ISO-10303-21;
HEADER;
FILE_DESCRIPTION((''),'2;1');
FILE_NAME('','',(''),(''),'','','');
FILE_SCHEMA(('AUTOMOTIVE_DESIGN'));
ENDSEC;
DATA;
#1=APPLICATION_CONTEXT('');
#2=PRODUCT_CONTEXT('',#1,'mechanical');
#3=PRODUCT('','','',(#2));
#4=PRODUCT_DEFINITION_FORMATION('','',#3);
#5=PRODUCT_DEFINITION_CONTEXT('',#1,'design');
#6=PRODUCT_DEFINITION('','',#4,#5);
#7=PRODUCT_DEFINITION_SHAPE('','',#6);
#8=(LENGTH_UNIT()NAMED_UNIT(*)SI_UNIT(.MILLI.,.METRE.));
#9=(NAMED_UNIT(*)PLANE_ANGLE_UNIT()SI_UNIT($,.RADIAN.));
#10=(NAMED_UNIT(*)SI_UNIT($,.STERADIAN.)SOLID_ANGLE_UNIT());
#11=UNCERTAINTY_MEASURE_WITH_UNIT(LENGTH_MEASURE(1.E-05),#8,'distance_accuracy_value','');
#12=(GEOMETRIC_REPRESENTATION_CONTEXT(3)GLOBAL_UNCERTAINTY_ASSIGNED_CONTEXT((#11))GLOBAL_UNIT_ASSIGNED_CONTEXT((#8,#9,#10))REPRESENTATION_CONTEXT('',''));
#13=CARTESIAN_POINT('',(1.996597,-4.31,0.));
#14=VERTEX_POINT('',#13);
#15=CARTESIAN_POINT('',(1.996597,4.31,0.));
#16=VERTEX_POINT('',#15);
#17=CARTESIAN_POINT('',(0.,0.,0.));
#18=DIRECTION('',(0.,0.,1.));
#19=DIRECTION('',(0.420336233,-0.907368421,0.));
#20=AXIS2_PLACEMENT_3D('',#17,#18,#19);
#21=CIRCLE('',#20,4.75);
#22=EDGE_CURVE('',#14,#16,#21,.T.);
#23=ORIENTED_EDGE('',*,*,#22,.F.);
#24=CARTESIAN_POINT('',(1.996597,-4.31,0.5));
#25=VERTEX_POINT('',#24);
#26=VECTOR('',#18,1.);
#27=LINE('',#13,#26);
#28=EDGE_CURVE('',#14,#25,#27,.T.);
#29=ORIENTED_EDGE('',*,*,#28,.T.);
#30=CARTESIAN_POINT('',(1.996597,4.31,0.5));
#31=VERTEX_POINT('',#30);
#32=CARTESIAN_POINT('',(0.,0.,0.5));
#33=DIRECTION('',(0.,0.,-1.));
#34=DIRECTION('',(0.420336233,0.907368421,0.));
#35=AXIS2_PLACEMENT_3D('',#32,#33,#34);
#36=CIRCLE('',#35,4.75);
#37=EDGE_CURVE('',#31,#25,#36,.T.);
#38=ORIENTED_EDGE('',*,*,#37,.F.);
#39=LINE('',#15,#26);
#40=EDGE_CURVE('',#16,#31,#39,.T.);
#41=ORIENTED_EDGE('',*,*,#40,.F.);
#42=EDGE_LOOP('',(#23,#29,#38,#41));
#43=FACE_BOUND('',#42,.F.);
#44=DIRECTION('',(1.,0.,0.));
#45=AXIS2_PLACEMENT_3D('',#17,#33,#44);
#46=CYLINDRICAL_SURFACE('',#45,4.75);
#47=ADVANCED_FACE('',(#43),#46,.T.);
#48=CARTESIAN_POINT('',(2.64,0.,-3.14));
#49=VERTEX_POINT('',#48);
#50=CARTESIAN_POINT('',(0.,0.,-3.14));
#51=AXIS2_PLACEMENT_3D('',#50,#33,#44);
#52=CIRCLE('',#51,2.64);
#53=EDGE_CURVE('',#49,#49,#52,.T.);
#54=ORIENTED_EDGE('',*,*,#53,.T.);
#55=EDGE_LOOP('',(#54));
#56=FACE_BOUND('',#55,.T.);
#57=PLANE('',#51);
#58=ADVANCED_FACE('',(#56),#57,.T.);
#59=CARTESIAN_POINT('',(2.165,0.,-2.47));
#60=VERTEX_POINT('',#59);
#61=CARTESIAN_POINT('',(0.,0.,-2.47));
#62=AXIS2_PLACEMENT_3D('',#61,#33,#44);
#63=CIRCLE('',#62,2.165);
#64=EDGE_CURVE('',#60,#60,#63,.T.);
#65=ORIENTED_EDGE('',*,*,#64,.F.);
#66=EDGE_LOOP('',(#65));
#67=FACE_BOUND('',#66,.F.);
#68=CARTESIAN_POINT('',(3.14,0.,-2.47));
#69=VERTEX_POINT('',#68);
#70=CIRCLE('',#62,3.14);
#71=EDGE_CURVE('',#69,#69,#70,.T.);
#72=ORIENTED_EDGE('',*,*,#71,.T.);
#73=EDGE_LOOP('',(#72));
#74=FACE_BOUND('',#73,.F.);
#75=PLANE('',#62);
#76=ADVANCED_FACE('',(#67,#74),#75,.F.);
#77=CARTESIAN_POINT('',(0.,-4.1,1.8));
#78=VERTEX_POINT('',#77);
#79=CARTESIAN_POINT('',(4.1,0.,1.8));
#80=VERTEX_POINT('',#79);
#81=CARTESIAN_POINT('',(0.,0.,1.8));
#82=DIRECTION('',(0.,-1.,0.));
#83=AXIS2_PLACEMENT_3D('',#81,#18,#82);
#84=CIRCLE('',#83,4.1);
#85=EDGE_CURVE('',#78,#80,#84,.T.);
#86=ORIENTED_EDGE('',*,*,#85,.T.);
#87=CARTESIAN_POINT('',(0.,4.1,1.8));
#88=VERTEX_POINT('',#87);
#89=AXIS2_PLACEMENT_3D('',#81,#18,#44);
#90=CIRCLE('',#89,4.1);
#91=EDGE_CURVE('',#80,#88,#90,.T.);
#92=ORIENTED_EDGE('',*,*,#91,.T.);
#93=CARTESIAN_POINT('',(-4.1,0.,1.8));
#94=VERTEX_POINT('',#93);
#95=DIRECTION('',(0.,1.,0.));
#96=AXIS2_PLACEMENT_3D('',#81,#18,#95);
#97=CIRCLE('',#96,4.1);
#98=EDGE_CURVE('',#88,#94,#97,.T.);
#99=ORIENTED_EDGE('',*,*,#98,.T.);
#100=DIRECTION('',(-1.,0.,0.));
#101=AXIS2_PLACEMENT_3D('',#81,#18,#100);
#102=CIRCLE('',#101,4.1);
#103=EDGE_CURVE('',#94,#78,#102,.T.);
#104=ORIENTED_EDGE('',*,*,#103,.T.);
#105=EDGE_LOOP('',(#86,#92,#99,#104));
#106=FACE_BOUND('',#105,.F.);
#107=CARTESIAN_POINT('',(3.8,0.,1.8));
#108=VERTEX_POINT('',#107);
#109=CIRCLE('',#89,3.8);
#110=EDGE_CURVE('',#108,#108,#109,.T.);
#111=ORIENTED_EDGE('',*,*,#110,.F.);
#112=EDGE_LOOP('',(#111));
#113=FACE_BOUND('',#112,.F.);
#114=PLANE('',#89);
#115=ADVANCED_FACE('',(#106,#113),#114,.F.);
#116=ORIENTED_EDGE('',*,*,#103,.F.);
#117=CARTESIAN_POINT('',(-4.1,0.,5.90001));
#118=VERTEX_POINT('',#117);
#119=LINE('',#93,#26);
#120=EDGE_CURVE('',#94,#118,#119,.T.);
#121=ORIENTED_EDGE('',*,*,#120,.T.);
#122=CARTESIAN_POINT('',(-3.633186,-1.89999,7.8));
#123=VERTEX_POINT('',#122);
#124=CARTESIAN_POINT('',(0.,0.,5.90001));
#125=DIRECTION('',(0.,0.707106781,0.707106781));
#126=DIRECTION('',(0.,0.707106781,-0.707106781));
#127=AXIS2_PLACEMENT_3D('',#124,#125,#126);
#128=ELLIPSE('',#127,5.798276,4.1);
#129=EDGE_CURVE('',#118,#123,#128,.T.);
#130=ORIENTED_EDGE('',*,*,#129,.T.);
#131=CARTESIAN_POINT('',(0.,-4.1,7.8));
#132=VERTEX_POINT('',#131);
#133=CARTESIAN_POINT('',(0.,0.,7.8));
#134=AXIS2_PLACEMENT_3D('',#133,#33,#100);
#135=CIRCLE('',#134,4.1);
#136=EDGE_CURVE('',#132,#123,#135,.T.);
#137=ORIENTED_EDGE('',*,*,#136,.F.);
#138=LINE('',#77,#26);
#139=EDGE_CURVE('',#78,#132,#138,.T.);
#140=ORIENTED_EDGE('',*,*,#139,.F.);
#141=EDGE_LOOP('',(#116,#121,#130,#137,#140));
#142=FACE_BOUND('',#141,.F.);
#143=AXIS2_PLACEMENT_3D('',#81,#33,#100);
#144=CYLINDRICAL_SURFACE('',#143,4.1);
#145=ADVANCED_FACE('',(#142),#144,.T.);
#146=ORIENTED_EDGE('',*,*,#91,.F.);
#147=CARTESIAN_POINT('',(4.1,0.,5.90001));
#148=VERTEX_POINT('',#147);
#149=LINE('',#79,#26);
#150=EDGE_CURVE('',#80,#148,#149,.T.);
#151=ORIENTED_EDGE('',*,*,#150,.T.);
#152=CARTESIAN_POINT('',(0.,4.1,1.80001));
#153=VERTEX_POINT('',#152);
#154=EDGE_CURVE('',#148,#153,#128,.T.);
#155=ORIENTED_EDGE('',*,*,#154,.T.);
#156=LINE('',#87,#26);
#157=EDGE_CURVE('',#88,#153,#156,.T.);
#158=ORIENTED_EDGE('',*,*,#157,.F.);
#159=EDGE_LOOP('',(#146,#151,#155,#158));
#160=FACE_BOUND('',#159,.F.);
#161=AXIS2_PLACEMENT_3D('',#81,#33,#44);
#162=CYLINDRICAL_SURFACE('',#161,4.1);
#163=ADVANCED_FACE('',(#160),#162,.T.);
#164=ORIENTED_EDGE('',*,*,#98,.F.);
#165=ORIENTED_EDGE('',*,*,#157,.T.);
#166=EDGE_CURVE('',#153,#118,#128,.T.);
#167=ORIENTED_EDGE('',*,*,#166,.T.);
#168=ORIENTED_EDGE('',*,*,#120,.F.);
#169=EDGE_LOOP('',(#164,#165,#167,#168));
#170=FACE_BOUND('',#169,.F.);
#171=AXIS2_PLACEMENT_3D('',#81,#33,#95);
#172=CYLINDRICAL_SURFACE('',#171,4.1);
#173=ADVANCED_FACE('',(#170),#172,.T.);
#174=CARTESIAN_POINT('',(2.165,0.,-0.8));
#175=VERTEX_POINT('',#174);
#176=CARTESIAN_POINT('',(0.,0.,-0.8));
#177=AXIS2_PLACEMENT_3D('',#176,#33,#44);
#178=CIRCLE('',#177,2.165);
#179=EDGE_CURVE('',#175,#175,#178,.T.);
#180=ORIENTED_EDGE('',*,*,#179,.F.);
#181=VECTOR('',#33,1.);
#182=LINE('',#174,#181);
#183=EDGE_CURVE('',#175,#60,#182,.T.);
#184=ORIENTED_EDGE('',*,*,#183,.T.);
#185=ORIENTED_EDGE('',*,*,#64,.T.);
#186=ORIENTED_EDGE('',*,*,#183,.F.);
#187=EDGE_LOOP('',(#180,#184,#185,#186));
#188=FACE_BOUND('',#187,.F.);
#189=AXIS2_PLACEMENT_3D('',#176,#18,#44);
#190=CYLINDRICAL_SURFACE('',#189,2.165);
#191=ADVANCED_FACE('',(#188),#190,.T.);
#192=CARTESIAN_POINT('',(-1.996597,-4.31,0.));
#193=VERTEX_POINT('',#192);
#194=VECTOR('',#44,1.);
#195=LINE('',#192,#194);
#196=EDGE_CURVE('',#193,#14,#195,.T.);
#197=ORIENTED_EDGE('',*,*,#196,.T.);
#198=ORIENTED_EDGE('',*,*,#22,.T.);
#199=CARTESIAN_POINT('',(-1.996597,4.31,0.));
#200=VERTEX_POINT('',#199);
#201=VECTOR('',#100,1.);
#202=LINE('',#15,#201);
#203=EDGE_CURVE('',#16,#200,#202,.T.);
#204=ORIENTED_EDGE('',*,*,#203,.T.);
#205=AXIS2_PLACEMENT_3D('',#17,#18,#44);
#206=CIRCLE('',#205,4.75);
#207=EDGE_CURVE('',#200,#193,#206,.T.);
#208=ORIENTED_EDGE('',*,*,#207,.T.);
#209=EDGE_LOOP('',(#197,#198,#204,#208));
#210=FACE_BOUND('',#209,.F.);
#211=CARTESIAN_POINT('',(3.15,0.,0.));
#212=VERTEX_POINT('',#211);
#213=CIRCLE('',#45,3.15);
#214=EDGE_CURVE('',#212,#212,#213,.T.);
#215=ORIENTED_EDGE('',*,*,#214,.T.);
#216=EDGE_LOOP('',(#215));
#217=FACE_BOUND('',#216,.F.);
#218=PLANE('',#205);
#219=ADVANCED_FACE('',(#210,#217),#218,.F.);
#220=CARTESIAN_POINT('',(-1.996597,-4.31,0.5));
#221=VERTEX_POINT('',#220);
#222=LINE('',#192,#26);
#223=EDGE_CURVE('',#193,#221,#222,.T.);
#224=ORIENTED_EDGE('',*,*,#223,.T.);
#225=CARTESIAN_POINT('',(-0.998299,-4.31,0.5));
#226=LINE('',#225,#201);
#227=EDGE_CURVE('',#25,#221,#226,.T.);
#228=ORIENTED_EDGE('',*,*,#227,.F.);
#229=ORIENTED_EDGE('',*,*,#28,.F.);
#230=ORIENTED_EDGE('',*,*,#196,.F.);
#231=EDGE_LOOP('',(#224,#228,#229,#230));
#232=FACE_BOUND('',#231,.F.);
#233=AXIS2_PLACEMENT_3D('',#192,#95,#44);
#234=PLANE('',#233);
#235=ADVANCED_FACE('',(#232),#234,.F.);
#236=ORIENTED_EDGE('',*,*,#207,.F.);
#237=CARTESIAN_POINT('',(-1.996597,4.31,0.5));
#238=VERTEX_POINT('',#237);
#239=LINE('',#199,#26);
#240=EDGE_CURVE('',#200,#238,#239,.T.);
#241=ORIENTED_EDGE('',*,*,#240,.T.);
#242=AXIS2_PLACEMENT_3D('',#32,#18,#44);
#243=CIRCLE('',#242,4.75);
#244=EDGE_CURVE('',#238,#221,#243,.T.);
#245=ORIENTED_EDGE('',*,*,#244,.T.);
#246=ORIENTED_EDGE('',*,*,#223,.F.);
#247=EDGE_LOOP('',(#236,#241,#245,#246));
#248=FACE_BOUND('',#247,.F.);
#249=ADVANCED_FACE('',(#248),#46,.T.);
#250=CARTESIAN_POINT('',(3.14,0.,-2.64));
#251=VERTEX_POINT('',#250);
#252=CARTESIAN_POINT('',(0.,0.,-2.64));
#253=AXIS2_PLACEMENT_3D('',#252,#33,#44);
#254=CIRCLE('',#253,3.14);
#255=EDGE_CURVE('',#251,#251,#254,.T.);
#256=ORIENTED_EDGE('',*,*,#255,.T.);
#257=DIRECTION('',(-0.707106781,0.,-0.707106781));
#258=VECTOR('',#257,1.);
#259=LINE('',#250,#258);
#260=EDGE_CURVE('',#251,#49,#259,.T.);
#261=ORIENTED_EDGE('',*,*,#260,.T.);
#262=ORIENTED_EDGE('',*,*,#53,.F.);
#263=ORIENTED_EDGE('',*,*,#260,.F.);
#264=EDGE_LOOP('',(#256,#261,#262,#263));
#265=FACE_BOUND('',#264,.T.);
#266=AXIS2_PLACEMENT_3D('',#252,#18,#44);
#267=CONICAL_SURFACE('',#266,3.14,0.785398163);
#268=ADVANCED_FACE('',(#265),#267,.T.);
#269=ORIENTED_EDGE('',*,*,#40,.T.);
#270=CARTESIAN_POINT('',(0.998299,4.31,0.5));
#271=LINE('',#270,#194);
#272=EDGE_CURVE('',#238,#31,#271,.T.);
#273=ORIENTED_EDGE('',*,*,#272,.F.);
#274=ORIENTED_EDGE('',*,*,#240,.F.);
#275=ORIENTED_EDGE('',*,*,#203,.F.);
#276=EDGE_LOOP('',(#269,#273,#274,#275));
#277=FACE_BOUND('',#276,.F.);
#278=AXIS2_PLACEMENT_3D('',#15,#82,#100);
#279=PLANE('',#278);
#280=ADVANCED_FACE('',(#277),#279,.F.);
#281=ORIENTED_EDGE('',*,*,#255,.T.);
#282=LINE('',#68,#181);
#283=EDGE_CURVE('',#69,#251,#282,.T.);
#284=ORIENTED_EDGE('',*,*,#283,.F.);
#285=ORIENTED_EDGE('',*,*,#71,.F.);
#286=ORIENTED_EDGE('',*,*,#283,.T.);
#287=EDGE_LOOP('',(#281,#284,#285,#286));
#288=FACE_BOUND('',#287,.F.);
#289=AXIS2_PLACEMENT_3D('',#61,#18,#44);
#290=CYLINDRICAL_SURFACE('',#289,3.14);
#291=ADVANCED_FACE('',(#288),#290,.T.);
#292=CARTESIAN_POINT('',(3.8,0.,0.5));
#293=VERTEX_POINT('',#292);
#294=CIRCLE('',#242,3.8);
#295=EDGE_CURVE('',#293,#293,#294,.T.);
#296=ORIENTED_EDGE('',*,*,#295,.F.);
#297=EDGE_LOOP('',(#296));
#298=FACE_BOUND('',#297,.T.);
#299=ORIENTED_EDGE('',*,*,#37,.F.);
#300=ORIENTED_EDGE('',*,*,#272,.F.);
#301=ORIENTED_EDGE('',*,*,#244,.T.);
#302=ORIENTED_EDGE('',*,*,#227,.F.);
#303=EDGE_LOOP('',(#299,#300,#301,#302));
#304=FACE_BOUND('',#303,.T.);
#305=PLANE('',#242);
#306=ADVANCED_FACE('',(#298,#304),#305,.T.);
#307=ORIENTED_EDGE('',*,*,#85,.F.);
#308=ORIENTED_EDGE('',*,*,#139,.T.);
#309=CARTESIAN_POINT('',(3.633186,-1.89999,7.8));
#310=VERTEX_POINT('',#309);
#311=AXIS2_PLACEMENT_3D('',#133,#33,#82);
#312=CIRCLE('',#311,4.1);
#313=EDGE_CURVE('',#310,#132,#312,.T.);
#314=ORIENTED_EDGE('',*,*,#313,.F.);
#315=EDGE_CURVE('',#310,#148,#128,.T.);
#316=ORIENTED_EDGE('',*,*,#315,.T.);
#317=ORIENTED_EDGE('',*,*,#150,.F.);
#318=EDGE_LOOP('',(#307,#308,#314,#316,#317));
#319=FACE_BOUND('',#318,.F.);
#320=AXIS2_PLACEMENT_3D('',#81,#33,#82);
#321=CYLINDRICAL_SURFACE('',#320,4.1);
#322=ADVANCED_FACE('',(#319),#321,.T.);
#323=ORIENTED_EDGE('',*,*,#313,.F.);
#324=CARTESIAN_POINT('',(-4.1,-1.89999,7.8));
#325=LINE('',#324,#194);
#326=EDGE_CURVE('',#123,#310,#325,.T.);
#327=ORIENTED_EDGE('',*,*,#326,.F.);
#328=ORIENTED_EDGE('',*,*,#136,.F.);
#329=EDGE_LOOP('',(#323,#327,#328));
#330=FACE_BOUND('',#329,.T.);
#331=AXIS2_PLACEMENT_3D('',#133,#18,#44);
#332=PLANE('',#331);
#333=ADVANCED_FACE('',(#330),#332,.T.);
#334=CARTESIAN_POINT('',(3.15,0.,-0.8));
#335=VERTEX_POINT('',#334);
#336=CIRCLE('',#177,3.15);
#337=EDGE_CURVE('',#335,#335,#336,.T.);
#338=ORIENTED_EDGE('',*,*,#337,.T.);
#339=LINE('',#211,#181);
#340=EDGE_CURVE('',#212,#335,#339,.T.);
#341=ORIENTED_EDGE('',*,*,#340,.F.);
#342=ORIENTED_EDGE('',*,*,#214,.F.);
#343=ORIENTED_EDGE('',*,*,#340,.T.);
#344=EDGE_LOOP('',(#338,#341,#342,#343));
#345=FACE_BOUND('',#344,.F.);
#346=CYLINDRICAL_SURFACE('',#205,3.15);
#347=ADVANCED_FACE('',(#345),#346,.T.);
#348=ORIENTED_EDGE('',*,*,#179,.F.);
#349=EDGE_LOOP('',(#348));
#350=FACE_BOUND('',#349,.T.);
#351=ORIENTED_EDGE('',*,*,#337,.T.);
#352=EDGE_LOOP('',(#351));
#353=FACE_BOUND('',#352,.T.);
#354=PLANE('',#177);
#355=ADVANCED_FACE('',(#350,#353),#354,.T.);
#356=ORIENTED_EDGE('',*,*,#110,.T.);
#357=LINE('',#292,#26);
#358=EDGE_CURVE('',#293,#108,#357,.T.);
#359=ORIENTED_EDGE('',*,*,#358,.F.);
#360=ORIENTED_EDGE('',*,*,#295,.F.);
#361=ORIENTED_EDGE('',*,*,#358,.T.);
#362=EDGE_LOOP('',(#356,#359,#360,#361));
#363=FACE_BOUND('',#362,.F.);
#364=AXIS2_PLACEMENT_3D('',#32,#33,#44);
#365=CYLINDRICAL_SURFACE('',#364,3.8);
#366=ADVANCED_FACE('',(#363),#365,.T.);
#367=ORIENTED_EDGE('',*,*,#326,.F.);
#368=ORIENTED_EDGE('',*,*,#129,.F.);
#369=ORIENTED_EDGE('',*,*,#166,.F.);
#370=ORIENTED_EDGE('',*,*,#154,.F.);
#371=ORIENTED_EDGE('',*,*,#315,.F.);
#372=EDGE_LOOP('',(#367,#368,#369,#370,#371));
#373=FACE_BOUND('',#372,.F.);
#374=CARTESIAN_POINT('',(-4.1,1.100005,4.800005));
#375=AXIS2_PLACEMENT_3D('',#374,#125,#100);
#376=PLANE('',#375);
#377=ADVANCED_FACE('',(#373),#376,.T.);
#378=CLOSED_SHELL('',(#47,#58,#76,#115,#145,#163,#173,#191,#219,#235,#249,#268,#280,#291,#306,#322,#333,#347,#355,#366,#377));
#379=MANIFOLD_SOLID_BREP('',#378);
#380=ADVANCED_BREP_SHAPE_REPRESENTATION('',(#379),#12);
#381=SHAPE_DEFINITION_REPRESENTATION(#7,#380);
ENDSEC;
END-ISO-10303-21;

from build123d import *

# Parameters (mm, degrees)
F0_R      = 4.75
F1_DEPTH  = 0.5
F2_R      = 3.8
F3_DEPTH  = 1.3
F5_DEPTH  = 1.801
F6_R      = 3.15
F7_DEPTH  = 0.8
F8_R      = 2.165
F9_DEPTH  = 1.67
F10_R     = 3.14
F11_DEPTH = 0.67
F12_SIZE  = 0.5
F13_W     = 8.2
F13_H     = 8.2
F13_R     = 3.8
F14_DEPTH = 6
F15_SIZE  = 5.99999
F17_DEPTH = 6.001


# Not quite as in the source:
# - a fillet or chamfer is up to 0.001 mm smaller than in the source, because OpenCascade refuses the exact size


with BuildPart() as f1:
    # F0 (on Top) → F1 (new body)
    with BuildSketch(Plane.XY):
        Circle(F0_R)
    extrude(amount=F1_DEPTH)

    # F2 (on face) → F3 (join)
    with BuildSketch(Plane.XY.offset(0.5)):
        Circle(F2_R)
    extrude(amount=F3_DEPTH)

    # F4 (on face) → F5 (cut, through all)
    with BuildSketch(Plane(origin=(0, 0, 0), x_dir=(1, 0, 0), z_dir=(0, 0, -1))):
        with BuildLine():
            Line((-1.9965971051, 4.31), (0, 4.31))
            Line((0, 4.31), (1.9965971051, 4.31))
            ThreePointArc((1.9965971051, 4.31), (0, 4.75), (-1.9965971051, 4.31))
        make_face()
        with BuildLine():
            Line((0, -4.31), (-1.9965971051, -4.31))
            ThreePointArc((-1.9965971051, -4.31), (0, -4.75), (1.9965971051, -4.31))
            Line((1.9965971051, -4.31), (0, -4.31))
        make_face()
    extrude(amount=-F5_DEPTH, mode=Mode.SUBTRACT)

    # F6 (on face) → F7 (join)
    with BuildSketch(Plane(origin=(0, 0, 0), x_dir=(1, 0, 0), z_dir=(0, 0, -1))):
        Circle(F6_R)
    extrude(amount=F7_DEPTH)

    # F8 (on face) → F9 (join)
    with BuildSketch(Plane(origin=(0, 0, -0.8), x_dir=(1, 0, 0), z_dir=(0, 0, -1))):
        Circle(F8_R)
    extrude(amount=F9_DEPTH)

    # F10 (on face) → F11 (join)
    with BuildSketch(Plane(origin=(0, 0, -2.47), x_dir=(1, 0, 0), z_dir=(0, 0, -1))):
        Circle(F10_R)
    extrude(amount=F11_DEPTH)

    # F12
    f12_edges = [f1.edges().sort_by_distance(p)[0] for p in [
        (-3.14, 0, -3.14),
    ]]
    chamfer(f12_edges, length=F12_SIZE)

    # F13 (on face) → F14 (join)
    with BuildSketch(Plane.XY.offset(1.8)):
        Rectangle(F13_W, F13_H)
        Circle(F13_R, mode=Mode.SUBTRACT)
        Circle(F13_R)
    extrude(amount=F14_DEPTH)

    # F15 (size 6 in the source; OpenCascade refuses exactly that, so slightly less here)
    f15_edges = [f1.edges().sort_by_distance(p)[0] for p in [
        (0, 4.1, 7.8),
    ]]
    chamfer(f15_edges, length=F15_SIZE)

    # F16 (on face) → F17 (cut, through all)
    with BuildSketch(Plane(origin=(0, 0, 1.8), x_dir=(1, 0, 0), z_dir=(0, 0, -1))):
        with BuildLine():
            ThreePointArc((0, 4.1), (2.8991378029, 2.8991378029), (4.1, 0))
            Line((4.1, 0), (4.1, 4.1))
            Line((4.1, 4.1), (0, 4.1))
        make_face()
        with BuildLine():
            Line((4.1, -4.1), (4.1, 0))
            ThreePointArc((4.1, 0), (2.8991378029, -2.8991378029), (0, -4.1))
            Line((0, -4.1), (4.1, -4.1))
        make_face()
        with BuildLine():
            ThreePointArc((-4.1, 0), (-2.8991378029, 2.8991378029), (0, 4.1))
            Line((0, 4.1), (-4.1, 4.1))
            Line((-4.1, 4.1), (-4.1, 0))
        make_face()
        with BuildLine():
            Line((-4.1, -4.1), (0, -4.1))
            ThreePointArc((0, -4.1), (-2.8991378029, -2.8991378029), (-4.1, 0))
            Line((-4.1, 0), (-4.1, -4.1))
        make_face()
    extrude(amount=-F17_DEPTH, mode=Mode.SUBTRACT)


solid = f1.part
